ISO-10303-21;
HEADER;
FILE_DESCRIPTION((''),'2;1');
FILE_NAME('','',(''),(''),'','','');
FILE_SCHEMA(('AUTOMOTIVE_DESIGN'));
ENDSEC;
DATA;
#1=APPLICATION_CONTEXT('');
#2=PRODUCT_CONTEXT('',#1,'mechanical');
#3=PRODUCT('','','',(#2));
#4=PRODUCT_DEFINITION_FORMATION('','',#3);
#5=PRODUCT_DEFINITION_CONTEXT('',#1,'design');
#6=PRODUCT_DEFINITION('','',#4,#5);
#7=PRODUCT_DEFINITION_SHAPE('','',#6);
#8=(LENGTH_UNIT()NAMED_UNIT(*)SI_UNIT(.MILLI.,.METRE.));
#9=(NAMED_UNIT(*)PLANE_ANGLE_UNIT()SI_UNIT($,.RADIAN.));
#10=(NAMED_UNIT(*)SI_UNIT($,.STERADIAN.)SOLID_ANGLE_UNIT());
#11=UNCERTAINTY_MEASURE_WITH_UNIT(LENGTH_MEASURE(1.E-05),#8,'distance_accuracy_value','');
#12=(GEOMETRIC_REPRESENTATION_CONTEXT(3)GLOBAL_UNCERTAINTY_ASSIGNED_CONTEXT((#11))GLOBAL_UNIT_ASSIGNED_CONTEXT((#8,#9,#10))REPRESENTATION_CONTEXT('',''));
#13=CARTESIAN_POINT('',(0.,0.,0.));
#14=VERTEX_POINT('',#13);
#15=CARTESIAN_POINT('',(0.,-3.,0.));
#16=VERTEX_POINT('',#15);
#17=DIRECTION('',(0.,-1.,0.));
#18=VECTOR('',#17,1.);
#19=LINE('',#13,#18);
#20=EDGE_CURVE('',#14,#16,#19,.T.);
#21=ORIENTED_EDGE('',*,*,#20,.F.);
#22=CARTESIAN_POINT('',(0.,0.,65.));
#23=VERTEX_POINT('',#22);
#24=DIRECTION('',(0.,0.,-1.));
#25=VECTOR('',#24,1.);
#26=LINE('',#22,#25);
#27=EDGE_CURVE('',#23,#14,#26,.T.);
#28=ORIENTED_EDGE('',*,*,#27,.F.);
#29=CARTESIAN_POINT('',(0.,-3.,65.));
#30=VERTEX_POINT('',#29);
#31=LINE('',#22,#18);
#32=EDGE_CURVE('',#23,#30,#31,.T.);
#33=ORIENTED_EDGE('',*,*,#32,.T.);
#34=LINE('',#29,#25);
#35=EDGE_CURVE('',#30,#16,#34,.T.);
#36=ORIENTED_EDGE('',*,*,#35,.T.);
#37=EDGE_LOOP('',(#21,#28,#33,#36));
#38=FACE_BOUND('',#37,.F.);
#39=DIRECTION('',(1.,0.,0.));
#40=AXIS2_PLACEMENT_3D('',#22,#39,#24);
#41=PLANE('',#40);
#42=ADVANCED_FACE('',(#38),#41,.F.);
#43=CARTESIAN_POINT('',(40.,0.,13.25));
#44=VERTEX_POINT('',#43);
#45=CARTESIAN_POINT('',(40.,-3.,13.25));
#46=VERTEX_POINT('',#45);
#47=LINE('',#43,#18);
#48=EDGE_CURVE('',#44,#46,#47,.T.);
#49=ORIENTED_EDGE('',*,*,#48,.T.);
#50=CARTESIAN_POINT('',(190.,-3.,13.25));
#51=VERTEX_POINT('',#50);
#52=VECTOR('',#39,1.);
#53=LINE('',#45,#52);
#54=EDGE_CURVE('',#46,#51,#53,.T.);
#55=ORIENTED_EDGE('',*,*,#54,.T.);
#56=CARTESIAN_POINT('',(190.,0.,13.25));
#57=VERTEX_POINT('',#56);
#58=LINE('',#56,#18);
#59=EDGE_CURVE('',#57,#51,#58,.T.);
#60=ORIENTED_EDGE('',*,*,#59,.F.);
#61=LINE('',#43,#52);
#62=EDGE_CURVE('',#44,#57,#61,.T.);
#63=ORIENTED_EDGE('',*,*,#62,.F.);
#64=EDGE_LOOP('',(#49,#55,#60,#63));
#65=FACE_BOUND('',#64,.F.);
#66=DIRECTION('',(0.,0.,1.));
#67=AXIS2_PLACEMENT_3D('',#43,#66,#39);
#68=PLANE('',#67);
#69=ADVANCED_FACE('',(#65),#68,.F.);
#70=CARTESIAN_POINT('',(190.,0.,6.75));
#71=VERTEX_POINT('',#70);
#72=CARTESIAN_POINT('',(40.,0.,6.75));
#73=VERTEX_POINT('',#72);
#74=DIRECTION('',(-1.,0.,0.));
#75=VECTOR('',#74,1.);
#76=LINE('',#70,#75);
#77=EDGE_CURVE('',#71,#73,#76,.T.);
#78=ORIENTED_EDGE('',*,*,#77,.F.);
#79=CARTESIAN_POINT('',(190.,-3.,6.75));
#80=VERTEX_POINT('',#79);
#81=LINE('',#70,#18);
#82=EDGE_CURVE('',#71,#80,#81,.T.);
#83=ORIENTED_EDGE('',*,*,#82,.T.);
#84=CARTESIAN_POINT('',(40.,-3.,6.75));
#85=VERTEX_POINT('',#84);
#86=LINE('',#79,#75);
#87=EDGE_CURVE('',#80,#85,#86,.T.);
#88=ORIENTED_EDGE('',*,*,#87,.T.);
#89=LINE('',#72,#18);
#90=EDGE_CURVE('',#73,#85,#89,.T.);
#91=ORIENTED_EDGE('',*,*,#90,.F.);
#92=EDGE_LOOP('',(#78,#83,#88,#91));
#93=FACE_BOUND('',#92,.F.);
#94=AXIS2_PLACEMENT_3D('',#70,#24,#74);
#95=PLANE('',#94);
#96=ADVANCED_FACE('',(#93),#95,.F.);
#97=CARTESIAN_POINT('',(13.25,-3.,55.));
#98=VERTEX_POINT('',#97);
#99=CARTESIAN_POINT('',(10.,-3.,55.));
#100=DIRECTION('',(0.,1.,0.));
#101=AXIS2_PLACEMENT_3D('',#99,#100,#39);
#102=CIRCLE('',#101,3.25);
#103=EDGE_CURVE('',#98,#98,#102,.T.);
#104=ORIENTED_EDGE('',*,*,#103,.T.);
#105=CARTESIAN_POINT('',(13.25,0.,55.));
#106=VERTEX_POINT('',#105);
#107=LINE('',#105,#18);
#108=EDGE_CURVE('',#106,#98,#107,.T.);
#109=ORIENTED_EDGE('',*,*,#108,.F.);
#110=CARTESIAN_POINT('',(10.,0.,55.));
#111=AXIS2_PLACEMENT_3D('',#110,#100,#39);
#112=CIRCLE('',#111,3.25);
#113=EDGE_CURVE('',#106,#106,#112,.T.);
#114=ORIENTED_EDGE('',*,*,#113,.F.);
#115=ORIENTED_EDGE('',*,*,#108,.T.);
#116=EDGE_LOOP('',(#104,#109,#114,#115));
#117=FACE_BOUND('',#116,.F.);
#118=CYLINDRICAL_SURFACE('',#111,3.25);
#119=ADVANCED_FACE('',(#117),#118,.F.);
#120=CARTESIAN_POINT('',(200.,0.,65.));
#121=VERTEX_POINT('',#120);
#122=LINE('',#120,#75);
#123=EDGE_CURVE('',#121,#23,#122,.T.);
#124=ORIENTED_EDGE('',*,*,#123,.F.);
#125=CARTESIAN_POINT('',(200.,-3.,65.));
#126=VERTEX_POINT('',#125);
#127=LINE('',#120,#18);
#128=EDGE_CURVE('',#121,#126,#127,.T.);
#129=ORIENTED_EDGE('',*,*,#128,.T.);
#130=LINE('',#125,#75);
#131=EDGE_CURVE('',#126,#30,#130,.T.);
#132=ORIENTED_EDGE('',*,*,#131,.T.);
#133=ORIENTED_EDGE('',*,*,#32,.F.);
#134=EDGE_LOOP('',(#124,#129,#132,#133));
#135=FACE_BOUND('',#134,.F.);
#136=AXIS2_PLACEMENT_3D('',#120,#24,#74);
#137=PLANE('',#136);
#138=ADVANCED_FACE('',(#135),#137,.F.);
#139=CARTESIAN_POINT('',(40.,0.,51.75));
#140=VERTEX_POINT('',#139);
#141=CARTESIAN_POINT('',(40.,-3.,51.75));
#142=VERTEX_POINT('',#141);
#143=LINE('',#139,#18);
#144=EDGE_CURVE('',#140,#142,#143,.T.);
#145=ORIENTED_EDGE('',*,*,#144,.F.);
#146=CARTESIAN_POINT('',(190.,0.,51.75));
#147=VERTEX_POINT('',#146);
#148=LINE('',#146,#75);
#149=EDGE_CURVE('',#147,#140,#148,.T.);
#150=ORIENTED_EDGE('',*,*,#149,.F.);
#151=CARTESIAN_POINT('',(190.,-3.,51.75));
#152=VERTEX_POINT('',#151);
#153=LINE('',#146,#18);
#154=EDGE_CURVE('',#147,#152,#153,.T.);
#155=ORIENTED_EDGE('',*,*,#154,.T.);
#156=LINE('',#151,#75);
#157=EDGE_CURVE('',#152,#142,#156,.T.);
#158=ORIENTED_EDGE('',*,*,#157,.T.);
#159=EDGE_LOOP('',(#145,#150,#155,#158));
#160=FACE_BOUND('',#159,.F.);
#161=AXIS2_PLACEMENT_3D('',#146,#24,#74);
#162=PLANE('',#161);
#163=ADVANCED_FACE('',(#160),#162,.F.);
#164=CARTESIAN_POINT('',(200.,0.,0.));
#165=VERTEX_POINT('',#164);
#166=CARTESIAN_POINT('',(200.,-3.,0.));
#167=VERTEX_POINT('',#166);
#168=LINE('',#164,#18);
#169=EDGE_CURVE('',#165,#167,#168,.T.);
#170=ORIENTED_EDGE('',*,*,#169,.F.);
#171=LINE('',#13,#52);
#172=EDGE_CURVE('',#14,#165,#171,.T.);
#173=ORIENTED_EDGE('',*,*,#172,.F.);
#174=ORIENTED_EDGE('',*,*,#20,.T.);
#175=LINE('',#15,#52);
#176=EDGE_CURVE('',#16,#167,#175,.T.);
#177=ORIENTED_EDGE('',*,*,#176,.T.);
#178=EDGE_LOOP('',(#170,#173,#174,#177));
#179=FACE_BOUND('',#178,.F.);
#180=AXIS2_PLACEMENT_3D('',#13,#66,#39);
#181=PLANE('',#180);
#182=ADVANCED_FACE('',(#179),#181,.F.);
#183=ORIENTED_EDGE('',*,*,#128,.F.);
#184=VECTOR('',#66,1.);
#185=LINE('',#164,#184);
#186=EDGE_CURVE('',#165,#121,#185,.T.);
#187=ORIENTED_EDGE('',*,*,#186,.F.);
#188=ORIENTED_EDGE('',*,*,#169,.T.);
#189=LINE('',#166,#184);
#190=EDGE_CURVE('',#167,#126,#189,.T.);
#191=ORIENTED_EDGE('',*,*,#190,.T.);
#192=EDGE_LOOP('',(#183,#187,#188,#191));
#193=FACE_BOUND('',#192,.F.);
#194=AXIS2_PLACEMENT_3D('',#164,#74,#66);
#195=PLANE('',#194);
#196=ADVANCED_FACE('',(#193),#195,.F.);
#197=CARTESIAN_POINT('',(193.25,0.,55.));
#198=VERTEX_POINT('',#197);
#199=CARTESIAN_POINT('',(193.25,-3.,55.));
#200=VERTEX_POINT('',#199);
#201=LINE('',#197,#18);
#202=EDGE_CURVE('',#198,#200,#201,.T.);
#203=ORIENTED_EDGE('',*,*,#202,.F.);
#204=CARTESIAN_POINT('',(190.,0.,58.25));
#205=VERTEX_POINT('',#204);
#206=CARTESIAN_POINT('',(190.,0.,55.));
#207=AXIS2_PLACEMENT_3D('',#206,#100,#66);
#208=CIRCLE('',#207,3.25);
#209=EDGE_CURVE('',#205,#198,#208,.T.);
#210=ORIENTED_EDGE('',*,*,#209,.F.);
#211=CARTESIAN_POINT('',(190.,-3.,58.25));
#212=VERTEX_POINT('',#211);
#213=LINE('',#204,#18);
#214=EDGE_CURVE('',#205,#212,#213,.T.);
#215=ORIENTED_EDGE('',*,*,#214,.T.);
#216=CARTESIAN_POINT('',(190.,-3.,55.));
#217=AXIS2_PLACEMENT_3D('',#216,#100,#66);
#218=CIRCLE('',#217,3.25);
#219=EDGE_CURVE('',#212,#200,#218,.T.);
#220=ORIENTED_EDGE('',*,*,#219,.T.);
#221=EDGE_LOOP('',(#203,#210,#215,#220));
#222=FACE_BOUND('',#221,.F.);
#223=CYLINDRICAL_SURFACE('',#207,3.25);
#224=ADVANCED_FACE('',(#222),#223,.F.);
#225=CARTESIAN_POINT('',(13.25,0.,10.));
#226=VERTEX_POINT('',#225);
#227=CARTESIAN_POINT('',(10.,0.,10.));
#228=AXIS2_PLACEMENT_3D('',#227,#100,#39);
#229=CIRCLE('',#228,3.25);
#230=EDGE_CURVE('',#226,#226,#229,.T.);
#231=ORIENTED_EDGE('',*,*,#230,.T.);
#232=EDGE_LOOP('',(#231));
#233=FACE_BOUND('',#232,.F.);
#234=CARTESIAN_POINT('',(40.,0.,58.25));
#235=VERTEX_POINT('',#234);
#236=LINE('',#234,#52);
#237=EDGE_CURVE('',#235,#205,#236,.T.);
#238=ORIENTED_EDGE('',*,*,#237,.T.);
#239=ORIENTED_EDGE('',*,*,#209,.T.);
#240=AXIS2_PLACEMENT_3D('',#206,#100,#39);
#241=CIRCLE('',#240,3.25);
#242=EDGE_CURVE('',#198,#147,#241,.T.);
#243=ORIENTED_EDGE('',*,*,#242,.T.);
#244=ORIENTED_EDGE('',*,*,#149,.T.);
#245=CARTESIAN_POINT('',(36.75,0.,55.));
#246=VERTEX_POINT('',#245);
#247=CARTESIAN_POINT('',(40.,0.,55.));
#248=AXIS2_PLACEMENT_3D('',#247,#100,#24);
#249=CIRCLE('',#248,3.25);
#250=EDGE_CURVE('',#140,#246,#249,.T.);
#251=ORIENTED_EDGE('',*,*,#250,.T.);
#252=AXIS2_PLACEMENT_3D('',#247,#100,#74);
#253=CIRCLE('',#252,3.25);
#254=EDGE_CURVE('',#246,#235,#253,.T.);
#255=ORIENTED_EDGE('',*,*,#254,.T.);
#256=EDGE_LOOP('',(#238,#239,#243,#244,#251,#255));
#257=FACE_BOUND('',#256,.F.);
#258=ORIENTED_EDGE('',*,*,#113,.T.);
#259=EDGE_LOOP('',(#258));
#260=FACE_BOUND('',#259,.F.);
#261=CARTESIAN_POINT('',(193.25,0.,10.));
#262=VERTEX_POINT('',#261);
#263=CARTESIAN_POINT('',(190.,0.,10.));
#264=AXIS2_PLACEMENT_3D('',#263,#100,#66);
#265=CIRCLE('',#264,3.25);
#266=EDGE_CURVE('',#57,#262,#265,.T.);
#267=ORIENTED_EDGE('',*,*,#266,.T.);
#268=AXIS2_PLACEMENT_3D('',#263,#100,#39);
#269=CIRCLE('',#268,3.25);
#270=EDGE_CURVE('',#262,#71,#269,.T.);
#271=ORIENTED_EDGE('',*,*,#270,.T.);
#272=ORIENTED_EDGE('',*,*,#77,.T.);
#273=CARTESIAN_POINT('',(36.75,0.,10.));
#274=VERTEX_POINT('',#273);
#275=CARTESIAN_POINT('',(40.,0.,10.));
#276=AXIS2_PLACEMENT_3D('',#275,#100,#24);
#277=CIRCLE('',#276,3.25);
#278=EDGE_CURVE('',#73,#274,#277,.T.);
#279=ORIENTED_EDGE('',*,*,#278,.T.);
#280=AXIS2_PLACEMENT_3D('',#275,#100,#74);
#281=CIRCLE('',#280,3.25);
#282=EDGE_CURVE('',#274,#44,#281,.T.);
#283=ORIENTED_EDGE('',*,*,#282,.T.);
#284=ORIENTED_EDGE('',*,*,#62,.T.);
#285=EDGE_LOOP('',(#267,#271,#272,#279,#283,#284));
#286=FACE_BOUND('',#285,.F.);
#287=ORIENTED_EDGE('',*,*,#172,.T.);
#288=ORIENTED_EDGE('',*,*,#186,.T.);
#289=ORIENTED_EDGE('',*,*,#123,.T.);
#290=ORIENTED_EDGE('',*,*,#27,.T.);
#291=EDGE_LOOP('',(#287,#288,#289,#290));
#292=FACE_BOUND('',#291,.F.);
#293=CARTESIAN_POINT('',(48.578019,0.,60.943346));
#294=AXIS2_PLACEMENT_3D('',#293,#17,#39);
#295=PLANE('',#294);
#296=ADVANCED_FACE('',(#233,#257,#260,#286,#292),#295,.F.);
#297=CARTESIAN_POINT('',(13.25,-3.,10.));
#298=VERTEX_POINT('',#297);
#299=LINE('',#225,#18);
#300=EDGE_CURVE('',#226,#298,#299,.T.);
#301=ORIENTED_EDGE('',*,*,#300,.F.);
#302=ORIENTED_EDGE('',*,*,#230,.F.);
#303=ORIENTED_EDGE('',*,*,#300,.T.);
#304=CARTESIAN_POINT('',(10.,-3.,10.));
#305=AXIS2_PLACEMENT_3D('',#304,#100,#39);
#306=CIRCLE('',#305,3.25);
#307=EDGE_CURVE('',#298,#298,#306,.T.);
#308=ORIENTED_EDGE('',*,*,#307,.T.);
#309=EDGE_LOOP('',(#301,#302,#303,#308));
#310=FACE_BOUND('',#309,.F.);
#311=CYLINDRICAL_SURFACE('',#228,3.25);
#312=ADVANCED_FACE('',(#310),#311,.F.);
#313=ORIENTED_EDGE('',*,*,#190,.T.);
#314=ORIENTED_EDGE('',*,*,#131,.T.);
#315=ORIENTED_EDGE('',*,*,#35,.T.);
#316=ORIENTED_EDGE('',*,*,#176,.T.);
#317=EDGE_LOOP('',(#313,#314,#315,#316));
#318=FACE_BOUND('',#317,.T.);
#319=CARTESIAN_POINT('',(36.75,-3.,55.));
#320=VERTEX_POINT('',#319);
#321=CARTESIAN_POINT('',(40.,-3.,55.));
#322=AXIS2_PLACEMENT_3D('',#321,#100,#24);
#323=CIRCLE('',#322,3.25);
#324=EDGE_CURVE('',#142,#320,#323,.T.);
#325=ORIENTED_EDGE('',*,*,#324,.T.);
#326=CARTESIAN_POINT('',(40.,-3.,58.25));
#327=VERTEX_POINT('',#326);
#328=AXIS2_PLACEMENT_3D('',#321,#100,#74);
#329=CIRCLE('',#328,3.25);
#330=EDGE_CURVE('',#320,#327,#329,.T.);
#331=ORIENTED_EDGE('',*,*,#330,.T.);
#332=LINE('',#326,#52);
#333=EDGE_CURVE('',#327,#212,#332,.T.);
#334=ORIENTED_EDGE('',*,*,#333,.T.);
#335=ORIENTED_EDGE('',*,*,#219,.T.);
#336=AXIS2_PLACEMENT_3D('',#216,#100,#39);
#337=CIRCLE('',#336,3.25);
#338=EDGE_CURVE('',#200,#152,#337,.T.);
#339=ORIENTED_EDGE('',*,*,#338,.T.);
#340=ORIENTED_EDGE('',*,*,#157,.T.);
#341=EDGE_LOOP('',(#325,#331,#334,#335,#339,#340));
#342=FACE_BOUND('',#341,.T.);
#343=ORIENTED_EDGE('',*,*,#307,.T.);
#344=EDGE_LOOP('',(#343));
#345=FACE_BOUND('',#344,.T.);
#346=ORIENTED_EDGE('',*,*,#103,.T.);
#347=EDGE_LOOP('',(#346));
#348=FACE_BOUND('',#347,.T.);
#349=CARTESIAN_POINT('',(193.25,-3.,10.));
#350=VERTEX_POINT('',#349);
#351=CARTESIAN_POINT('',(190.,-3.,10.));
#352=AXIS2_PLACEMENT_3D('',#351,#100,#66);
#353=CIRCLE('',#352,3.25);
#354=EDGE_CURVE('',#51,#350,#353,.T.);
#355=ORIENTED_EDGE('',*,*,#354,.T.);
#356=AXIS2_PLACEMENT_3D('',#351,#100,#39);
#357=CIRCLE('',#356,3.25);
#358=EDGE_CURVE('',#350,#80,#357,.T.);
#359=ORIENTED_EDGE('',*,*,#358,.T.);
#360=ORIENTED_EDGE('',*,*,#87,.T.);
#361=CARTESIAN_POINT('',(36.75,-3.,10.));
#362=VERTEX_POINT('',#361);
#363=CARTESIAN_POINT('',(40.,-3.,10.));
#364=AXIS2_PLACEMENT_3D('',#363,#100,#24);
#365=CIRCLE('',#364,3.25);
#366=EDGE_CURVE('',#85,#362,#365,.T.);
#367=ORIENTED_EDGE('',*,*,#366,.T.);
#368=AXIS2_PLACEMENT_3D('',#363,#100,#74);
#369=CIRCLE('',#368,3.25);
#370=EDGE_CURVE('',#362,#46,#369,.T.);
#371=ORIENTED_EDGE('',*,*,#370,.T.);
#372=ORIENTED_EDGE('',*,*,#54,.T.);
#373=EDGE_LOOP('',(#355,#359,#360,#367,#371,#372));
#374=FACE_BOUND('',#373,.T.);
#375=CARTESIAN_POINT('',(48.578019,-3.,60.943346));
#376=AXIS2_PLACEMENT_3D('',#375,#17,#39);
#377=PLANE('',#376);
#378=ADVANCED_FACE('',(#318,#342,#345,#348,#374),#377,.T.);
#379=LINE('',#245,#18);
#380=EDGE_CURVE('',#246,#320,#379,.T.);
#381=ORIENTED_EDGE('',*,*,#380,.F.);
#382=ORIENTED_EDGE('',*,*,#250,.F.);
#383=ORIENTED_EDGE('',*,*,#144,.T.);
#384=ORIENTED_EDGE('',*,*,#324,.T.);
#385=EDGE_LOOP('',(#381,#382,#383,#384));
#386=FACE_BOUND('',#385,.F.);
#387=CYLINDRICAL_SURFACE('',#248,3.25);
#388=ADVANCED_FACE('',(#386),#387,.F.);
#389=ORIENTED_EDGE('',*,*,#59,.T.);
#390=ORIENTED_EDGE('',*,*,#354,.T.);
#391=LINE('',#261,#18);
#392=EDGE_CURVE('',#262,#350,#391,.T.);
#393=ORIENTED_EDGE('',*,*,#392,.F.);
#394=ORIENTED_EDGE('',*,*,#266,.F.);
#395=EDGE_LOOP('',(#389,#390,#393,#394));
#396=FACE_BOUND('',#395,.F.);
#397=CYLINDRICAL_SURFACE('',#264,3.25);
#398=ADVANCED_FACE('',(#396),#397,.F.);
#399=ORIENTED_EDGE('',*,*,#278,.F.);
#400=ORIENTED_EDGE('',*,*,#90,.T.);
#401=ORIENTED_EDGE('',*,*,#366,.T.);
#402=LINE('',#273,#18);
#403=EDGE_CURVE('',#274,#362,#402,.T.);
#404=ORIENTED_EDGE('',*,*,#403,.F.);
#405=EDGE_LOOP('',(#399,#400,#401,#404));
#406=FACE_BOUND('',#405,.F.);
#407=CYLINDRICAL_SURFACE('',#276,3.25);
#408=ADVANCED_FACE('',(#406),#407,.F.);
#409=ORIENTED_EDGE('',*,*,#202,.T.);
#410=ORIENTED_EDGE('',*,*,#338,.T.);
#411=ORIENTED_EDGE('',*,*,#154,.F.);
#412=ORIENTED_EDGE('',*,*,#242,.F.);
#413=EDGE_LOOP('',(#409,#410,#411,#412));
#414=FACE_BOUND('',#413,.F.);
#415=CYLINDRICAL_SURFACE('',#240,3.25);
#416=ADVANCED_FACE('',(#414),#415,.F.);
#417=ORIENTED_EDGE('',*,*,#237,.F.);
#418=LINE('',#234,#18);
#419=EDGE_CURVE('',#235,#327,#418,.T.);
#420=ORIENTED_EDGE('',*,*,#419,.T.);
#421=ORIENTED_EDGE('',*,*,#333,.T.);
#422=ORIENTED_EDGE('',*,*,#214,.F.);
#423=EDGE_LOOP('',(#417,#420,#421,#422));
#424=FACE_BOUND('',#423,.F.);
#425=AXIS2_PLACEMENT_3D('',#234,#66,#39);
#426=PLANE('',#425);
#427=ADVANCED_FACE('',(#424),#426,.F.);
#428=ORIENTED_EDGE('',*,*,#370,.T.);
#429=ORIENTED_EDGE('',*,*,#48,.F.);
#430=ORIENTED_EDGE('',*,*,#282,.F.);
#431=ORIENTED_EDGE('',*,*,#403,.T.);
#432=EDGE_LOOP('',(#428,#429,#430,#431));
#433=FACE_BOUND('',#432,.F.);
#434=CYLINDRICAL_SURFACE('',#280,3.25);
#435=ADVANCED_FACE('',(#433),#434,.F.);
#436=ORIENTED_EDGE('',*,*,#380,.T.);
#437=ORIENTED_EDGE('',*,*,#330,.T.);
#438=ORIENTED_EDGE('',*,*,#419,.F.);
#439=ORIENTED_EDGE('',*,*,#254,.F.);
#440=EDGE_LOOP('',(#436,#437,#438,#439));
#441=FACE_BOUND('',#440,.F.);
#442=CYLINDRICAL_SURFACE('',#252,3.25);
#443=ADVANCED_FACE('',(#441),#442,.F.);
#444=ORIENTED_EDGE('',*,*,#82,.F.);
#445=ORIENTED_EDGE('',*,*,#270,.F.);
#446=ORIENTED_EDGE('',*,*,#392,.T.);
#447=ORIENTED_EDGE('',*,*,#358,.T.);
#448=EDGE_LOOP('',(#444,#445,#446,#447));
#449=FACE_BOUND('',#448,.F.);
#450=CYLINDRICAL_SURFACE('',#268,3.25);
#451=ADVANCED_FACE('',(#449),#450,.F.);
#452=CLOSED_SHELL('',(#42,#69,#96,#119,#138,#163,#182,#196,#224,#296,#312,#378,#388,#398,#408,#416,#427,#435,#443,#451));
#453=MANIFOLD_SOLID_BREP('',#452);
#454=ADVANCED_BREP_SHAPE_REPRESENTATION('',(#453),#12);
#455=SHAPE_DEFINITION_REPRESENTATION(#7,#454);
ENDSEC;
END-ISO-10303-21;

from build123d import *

# Parameters (mm, degrees)
F1_DEPTH = 3


# Not quite as in the source:
# - a feature names something its author has since deleted; it is built from what else it names


with BuildPart() as f1:
    # F0 (on Front) → F1 (new body)
    with BuildSketch(Plane.XZ):
        with BuildLine():
            Line((0, 65), (0, 55))
            Line((0, 55), (6.75, 55))
            ThreePointArc((6.75, 55), (10, 58.25), (13.25, 55))
            Line((13.25, 55), (36.75, 55))
            ThreePointArc((36.75, 55), (37.7019029611, 57.2980970389), (40, 58.25))
            Line((40, 58.25), (100, 58.25))
            Line((100, 58.25), (100, 65))
            Line((100, 65), (0, 65))
        make_face()
        with BuildLine():
            Line((0, 55), (0, 32.5))
            Line((0, 32.5), (30, 32.5))
            Line((30, 32.5), (100, 32.5))
            Line((100, 32.5), (100, 51.75))
            Line((100, 51.75), (40, 51.75))
            ThreePointArc((40, 51.75), (37.7019029611, 52.7019029611), (36.75, 55))
            Line((36.75, 55), (13.25, 55))
            ThreePointArc((13.25, 55), (10, 51.75), (6.75, 55))
            Line((6.75, 55), (0, 55))
        make_face()
        with BuildLine():
            Line((0, 32.5), (0, 10))
            Line((0, 10), (6.75, 10))
            ThreePointArc((6.75, 10), (10, 13.25), (13.25, 10))
            Line((13.25, 10), (30, 10))
            Line((30, 10), (30, 32.5))
            Line((30, 32.5), (0, 32.5))
        make_face()
        with BuildLine():
            Line((0, 10), (0, 0))
            Line((0, 0), (30, 0))
            Line((30, 0), (30, 10))
            Line((30, 10), (13.25, 10))
            ThreePointArc((13.25, 10), (10, 6.75), (6.75, 10))
            Line((6.75, 10), (0, 10))
        make_face()
        with BuildLine():
            Line((30, 32.5), (30, 10))
            Line((30, 10), (36.75, 10))
            ThreePointArc((36.75, 10), (37.7019029611, 12.2980970389), (40, 13.25))
            Line((40, 13.25), (100, 13.25))
            Line((100, 13.25), (100, 32.5))
            Line((100, 32.5), (30, 32.5))
        make_face()
        with BuildLine():
            Line((30, 10), (30, 0))
            Line((30, 0), (100, 0))
            Line((100, 0), (100, 6.75))
            Line((100, 6.75), (40, 6.75))
            ThreePointArc((40, 6.75), (37.7019029611, 7.7019029611), (36.75, 10))
            Line((36.75, 10), (30, 10))
        make_face()
        with BuildLine():
            Line((100, 32.5), (200, 32.5))
            Line((200, 32.5), (200, 65))
            Line((200, 65), (100, 65))
            Line((100, 65), (100, 58.25))
            Line((100, 58.25), (190, 58.25))
            ThreePointArc((190, 58.25), (192.2980970389, 57.2980970389), (193.25, 55))
            ThreePointArc((193.25, 55), (192.2980970389, 52.7019029611), (190, 51.75))
            Line((190, 51.75), (100, 51.75))
            Line((100, 51.75), (100, 32.5))
        make_face()
        with BuildLine():
            Line((100, 6.75), (100, 0))
            Line((100, 0), (200, 0))
            Line((200, 0), (200, 32.5))
            Line((200, 32.5), (100, 32.5))
            Line((100, 32.5), (100, 13.25))
            Line((100, 13.25), (190, 13.25))
            ThreePointArc((190, 13.25), (192.2980970389, 12.2980970389), (193.25, 10))
            ThreePointArc((193.25, 10), (192.2980970389, 7.7019029611), (190, 6.75))
            Line((190, 6.75), (100, 6.75))
        make_face()
    extrude(amount=F1_DEPTH)


solid = f1.part
